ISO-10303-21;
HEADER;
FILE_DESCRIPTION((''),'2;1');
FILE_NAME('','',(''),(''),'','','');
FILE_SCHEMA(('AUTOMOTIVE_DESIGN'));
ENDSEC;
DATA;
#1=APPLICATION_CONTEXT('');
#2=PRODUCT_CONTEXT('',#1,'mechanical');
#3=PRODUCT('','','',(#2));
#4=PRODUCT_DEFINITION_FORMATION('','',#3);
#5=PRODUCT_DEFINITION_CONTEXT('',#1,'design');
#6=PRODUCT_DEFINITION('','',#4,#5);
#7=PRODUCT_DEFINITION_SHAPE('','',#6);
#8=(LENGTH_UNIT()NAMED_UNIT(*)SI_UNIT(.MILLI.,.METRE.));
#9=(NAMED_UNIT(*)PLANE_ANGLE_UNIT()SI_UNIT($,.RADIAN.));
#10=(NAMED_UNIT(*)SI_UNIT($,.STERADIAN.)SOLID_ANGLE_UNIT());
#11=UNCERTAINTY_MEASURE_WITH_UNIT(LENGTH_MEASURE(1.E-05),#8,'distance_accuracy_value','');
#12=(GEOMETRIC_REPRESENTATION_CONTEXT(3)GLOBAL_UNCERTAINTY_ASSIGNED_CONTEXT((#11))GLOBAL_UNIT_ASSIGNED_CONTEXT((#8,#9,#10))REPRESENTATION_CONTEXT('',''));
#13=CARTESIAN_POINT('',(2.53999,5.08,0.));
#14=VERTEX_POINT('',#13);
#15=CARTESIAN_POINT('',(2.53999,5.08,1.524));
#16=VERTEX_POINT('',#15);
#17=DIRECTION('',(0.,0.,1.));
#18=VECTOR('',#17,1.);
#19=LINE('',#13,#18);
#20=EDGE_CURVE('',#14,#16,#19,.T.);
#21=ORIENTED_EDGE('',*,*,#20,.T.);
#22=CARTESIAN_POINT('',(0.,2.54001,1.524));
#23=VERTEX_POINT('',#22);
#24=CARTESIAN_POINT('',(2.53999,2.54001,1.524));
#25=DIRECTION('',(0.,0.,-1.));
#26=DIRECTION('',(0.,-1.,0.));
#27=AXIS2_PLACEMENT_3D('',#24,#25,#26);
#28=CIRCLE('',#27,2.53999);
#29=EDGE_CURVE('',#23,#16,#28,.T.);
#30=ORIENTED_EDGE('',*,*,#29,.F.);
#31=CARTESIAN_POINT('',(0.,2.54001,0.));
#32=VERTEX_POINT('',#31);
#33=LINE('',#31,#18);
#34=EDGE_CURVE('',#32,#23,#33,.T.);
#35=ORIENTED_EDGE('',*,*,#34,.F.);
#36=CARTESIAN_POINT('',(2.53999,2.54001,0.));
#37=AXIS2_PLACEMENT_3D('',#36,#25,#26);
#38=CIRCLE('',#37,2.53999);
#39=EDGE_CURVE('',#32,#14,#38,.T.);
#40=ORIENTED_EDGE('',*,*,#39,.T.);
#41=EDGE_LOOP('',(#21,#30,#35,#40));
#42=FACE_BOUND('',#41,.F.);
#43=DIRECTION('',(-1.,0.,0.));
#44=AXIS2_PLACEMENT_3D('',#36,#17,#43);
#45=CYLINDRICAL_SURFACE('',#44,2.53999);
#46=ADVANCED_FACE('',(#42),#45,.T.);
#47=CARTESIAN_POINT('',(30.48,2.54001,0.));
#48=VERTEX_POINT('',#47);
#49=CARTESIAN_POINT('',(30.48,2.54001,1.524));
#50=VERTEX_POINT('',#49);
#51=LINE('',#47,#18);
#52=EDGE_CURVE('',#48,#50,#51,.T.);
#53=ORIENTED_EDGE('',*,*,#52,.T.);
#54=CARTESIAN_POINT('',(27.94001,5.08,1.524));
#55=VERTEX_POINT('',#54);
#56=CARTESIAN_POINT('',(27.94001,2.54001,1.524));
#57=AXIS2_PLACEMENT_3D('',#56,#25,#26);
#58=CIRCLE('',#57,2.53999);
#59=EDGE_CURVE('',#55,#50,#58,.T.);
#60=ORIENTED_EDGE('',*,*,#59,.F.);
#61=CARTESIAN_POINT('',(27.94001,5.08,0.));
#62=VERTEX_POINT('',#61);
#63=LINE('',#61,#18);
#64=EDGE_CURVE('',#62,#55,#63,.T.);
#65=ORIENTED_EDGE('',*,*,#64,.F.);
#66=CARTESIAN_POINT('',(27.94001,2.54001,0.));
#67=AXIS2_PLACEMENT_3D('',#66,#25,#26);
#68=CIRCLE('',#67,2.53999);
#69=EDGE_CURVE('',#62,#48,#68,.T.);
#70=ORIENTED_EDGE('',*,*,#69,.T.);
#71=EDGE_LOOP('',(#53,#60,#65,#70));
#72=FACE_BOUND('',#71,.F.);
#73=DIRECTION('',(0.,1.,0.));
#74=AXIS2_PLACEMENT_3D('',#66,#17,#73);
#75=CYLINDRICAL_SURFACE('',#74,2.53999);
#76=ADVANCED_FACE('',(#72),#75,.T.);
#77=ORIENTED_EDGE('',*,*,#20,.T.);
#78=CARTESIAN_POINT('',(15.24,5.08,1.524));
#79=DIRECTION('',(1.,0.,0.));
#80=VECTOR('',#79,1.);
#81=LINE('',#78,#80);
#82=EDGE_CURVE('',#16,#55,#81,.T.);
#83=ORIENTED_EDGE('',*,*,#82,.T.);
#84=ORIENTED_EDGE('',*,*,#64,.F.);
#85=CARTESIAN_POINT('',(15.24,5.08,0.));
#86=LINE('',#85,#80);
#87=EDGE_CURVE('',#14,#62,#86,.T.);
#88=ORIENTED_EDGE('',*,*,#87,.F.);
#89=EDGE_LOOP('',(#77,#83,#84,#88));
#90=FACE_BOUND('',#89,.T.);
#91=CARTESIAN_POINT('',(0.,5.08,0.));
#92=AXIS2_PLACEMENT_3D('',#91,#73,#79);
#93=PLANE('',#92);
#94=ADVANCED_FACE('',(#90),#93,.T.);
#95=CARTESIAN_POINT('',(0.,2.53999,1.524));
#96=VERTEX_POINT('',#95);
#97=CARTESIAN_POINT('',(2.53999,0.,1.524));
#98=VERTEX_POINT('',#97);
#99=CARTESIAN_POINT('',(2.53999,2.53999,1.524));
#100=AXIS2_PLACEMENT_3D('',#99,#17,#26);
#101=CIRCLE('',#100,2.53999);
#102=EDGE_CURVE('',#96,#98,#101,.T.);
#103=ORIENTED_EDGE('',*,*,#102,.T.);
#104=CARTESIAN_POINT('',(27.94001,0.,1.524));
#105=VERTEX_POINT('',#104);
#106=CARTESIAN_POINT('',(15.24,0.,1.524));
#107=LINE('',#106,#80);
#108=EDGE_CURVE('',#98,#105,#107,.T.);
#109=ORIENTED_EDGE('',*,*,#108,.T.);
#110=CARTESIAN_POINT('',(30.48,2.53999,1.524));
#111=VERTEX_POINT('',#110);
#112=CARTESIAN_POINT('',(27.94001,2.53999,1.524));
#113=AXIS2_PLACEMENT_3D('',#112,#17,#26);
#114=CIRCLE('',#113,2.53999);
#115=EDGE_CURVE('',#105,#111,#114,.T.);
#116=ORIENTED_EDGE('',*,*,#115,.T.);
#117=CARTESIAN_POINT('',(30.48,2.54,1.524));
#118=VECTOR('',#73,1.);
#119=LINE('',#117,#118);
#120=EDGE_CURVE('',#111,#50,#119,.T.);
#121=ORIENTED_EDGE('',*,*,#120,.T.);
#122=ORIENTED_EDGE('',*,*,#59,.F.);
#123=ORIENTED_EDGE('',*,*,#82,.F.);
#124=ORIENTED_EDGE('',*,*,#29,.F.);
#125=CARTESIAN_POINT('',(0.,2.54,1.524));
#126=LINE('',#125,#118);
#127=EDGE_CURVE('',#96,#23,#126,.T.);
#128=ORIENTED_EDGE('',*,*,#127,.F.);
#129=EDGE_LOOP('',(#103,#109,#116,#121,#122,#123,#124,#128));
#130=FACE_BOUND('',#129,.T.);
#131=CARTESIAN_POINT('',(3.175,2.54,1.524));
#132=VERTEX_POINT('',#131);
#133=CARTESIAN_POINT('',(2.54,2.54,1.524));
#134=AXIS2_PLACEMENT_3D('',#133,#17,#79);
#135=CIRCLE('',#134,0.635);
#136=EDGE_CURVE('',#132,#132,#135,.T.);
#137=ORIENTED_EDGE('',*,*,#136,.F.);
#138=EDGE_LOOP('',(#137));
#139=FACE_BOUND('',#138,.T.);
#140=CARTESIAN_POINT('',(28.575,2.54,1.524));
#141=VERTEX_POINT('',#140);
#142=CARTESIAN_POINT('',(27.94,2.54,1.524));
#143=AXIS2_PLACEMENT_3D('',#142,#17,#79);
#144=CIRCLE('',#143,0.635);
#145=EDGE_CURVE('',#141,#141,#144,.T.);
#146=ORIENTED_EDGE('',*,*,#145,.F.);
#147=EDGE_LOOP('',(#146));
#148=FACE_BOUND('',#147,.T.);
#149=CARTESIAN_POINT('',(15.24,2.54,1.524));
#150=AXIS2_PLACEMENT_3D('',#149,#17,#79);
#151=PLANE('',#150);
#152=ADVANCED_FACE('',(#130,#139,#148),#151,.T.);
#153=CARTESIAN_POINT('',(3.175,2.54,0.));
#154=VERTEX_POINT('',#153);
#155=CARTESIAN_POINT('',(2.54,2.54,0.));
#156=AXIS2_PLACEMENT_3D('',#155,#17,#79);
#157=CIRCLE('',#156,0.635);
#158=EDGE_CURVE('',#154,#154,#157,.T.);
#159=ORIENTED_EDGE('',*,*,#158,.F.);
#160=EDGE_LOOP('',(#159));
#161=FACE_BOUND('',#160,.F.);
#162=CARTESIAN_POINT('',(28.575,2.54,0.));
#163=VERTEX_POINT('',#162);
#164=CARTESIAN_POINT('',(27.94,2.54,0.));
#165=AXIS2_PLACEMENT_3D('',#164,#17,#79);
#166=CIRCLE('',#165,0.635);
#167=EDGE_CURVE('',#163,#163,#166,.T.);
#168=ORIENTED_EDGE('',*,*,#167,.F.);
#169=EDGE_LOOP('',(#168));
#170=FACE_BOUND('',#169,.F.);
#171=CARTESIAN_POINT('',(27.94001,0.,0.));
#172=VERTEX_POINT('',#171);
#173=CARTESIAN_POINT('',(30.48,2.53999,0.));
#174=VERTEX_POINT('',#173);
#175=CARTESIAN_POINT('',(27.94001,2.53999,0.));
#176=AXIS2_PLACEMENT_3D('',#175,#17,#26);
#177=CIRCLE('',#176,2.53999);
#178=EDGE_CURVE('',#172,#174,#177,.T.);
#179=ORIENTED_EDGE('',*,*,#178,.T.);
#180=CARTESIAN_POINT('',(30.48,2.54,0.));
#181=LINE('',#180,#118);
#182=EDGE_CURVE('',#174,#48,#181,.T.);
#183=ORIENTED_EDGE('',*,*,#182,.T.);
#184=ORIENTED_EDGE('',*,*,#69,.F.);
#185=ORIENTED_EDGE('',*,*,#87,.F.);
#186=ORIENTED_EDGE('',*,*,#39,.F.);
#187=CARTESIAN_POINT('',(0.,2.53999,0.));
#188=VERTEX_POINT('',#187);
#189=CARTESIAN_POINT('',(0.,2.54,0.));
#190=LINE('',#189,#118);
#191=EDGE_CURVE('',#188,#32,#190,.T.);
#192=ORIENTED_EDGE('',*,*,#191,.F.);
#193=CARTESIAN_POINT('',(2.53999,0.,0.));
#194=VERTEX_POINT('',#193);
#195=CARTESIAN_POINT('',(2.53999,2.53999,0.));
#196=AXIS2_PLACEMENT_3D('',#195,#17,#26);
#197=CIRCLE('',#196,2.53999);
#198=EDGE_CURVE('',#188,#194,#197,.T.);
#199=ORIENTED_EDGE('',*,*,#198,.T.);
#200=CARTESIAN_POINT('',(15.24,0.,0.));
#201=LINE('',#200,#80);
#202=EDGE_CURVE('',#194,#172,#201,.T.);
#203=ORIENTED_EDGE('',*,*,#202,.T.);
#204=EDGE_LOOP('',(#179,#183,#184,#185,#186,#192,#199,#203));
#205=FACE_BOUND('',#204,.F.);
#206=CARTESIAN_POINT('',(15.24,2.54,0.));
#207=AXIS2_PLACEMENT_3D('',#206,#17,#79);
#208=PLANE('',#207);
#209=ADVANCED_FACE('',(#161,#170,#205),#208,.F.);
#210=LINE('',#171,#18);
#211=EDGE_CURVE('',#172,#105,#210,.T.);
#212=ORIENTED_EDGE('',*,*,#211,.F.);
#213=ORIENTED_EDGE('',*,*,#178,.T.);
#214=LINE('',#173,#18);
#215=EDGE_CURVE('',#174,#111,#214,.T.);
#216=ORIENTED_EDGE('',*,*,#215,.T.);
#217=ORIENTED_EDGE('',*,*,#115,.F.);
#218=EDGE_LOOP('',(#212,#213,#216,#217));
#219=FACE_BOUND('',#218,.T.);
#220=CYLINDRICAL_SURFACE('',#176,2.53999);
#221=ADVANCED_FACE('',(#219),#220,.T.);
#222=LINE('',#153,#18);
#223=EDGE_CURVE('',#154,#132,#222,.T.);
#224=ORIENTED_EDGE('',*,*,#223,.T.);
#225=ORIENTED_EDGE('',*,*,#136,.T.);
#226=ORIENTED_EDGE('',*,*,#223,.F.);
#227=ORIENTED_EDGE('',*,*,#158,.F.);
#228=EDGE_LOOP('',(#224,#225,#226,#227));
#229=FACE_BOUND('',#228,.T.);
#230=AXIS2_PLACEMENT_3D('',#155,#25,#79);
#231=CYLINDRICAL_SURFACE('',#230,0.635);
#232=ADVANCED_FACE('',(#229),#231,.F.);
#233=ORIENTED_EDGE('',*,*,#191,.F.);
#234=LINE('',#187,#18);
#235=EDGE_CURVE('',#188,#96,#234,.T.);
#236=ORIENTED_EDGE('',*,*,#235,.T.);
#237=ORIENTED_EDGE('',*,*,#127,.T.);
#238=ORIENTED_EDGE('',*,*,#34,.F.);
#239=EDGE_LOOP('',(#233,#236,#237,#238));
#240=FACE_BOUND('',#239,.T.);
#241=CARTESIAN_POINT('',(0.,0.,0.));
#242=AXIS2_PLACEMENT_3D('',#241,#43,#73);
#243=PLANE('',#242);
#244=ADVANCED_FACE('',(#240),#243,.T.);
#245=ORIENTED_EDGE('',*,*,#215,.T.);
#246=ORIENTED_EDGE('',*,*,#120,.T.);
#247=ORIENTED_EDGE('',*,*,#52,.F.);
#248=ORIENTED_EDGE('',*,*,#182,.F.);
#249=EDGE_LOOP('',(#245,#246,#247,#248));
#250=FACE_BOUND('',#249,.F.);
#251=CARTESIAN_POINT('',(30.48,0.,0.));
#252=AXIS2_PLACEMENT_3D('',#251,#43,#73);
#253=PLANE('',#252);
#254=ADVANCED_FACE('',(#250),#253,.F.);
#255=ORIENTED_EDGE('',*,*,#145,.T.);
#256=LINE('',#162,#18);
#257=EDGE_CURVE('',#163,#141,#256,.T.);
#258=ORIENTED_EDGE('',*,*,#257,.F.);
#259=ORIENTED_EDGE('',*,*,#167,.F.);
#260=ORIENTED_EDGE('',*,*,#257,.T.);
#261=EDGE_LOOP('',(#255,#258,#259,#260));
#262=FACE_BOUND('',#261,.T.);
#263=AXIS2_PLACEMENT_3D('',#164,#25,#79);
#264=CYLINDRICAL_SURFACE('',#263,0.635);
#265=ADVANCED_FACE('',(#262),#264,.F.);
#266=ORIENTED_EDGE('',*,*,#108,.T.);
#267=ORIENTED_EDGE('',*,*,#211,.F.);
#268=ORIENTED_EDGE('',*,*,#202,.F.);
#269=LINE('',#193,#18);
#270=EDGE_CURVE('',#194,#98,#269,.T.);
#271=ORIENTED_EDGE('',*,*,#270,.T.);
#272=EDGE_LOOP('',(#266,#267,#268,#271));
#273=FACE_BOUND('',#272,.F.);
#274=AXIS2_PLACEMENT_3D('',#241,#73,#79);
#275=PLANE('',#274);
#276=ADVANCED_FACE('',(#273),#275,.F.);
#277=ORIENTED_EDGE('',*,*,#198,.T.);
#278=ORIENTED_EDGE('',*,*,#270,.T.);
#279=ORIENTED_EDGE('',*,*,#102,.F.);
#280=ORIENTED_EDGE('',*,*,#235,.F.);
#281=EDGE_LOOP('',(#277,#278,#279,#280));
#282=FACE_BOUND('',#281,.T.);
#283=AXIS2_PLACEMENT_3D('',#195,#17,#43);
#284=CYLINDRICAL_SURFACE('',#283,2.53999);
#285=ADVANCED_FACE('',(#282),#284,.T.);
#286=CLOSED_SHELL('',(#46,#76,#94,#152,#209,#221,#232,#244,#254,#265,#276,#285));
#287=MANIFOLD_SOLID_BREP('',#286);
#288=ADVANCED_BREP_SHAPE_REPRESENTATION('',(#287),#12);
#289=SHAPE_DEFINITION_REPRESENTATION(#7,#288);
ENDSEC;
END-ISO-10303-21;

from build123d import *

# Parameters (mm, degrees)
F0_W     = 30.48
F0_H     = 5.08
F0_R     = 0.635
F1_DEPTH = 1.524
F2_R     = 2.53999


# Not quite as in the source:
# - a fillet or chamfer is up to 0.001 mm smaller than in the source, because OpenCascade refuses the exact size


with BuildPart() as f1:
    # F0 (on Top) → F1 (new body)
    with BuildSketch(Plane.XY):
        with Locations((15.24, 2.54)):
            Rectangle(F0_W, F0_H)
        with Locations((2.54, 2.54)):
            Circle(F0_R, mode=Mode.SUBTRACT)
        with Locations((27.94, 2.54)):
            Circle(F0_R, mode=Mode.SUBTRACT)
    extrude(amount=F1_DEPTH)

    # F2 (radius 2.54 in the source; OpenCascade refuses exactly that, so slightly less here)
    f2_edges = [f1.edges().sort_by_distance(p)[0] for p in [
        (0, 0, 0.762),
        (0, 5.08, 0.762),
        (30.48, 0, 0.762),
        (30.48, 5.08, 0.762),
    ]]
    fillet(f2_edges, radius=F2_R)


solid = f1.part
